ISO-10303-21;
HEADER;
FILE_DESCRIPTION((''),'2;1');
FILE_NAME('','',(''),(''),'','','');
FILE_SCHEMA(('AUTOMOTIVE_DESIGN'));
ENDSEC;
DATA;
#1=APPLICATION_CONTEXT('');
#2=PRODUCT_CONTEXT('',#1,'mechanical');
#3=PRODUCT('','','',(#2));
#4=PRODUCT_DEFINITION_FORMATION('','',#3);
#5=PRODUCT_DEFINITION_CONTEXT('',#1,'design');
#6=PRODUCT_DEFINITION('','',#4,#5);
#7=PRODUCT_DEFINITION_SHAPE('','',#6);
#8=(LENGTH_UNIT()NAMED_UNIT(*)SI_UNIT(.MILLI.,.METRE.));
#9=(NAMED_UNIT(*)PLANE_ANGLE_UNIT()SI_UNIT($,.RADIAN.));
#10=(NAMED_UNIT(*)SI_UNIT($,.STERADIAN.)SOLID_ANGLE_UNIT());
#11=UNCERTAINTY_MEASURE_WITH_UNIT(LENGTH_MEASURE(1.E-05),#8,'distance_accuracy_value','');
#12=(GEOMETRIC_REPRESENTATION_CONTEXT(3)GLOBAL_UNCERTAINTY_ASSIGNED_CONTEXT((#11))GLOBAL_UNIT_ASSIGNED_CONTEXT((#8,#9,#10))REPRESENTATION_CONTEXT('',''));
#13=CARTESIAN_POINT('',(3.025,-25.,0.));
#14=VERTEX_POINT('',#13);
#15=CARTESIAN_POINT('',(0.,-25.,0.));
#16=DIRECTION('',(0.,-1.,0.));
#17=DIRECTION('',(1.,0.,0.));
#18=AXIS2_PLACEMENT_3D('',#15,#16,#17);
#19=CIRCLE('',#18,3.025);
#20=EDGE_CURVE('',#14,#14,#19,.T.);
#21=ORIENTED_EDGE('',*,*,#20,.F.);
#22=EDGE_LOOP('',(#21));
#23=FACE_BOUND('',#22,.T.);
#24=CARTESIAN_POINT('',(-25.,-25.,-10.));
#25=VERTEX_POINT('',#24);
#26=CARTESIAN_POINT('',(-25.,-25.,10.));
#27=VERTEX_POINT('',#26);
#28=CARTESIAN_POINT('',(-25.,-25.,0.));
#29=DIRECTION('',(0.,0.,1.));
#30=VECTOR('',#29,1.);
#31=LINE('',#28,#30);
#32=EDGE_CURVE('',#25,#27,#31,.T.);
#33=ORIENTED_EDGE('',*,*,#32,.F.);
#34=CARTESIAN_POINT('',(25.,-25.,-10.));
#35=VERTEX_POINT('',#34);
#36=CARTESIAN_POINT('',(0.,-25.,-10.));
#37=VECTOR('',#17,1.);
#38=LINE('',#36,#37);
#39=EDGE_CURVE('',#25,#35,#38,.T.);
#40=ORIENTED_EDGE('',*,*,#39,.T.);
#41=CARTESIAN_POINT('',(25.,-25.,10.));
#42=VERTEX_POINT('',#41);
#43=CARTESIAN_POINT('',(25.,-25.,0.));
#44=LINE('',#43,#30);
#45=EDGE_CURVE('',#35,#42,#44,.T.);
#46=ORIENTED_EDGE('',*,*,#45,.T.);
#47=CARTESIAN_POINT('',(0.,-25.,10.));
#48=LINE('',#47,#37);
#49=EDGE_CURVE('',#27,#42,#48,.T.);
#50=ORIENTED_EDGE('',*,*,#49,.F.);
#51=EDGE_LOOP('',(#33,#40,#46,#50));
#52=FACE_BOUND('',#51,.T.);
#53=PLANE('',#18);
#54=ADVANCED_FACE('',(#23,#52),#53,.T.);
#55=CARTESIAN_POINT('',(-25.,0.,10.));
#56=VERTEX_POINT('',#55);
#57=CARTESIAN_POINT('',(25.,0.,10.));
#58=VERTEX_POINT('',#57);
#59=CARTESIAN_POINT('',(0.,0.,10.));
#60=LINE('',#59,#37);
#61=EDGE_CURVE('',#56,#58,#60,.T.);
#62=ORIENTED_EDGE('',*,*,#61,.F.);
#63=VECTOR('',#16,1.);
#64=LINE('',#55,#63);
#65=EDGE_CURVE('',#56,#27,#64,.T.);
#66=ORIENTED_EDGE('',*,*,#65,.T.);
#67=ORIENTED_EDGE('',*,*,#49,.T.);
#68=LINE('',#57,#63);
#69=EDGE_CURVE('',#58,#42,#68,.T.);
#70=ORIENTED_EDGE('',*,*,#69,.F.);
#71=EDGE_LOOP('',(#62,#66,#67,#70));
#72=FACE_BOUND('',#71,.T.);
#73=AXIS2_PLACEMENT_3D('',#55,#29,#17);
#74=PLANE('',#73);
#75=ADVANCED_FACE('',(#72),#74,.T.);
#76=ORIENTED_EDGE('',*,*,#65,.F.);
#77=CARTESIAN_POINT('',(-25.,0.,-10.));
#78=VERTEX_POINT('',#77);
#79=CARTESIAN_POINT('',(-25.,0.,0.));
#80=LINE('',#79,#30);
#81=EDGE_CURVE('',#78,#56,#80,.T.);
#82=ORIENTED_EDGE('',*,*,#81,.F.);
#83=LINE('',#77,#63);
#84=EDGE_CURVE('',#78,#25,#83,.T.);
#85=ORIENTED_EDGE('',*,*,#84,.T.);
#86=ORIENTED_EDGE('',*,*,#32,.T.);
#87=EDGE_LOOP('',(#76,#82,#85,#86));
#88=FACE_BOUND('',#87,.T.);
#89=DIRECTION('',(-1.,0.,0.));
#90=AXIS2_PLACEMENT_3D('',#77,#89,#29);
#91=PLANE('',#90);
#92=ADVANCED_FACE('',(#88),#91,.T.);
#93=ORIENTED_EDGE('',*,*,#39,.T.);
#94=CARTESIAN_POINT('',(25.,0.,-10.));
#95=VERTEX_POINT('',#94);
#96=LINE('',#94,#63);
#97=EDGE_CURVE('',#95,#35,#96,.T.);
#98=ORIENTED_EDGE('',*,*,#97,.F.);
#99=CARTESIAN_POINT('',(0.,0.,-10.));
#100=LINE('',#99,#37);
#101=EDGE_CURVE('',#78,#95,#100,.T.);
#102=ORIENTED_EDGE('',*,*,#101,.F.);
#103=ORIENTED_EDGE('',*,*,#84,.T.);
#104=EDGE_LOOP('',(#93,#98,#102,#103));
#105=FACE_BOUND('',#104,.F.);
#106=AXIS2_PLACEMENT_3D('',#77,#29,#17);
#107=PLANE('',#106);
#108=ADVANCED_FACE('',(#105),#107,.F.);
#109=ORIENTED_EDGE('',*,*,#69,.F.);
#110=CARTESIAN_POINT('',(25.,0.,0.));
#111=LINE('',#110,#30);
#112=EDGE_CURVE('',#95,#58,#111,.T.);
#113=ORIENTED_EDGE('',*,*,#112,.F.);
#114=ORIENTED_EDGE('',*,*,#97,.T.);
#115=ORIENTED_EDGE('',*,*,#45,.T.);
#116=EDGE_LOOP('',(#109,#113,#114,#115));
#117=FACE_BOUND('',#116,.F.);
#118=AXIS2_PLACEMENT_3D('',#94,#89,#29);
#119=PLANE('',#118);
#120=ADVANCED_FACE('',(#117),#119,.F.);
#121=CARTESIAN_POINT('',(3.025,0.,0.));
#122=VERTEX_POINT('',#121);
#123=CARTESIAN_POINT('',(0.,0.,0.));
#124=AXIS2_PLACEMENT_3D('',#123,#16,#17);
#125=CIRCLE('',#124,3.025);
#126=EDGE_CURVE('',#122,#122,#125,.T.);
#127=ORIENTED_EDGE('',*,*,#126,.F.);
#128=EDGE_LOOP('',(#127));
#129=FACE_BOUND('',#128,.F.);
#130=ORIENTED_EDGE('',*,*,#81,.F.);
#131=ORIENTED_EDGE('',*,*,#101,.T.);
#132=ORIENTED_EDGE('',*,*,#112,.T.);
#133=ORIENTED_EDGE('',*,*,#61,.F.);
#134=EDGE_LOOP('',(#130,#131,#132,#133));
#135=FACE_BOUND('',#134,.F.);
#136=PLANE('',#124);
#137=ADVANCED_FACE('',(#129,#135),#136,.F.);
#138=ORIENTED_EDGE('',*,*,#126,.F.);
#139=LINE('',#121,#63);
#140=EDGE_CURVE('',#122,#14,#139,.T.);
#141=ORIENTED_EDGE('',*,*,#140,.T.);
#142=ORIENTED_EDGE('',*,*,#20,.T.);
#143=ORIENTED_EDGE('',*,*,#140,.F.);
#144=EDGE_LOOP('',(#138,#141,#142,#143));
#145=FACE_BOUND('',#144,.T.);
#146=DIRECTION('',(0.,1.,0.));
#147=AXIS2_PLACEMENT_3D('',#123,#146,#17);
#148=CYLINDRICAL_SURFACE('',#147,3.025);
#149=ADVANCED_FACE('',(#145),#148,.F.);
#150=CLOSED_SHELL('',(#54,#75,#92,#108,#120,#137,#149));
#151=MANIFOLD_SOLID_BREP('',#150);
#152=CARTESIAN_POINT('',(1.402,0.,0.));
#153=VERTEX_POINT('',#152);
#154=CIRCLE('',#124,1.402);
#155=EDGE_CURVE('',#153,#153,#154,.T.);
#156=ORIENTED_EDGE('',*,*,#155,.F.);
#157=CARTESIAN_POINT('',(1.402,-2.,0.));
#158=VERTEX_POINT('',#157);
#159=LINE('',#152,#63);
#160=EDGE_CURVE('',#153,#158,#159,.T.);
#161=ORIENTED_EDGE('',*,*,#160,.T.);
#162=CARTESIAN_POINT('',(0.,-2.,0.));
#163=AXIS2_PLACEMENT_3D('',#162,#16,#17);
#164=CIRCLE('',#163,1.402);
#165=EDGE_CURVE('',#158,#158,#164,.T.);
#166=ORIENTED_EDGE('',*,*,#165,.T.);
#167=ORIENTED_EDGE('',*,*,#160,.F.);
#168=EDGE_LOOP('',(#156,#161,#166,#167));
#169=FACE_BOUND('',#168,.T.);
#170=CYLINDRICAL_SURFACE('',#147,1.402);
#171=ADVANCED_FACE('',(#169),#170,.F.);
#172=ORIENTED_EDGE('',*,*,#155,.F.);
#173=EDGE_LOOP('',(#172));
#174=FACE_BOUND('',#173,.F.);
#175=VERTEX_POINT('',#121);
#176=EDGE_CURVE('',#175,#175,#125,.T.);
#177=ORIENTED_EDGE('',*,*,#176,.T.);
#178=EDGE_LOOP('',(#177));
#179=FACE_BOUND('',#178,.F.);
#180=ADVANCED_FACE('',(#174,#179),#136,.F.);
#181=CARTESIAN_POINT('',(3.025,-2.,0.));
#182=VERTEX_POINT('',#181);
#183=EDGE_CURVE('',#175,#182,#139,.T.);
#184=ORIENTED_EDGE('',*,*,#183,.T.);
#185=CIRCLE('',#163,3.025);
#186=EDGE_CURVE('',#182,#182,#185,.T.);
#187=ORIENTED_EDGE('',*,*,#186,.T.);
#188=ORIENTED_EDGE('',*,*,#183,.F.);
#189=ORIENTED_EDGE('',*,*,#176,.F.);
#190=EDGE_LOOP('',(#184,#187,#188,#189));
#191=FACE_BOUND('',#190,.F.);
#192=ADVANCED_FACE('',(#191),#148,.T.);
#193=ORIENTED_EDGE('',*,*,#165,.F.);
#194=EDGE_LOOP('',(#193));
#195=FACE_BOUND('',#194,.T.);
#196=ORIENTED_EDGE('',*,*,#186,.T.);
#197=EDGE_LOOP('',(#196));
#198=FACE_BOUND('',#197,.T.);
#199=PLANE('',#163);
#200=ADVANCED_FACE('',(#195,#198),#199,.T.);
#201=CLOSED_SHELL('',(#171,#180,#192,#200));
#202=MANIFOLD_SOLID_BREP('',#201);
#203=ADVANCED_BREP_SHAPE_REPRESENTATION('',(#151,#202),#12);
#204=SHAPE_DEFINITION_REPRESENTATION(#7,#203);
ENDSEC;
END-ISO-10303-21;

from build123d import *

# Parameters (mm, degrees)
F0_W     = 50
F0_H     = 20
F0_R     = 3.025
F1_DEPTH = 25
F0_R_2   = 1.402
F3_DEPTH = 2


# Not quite as in the source:
# - the program builds the solid bodies; features that only make, move or delete a surface that nothing else refers to are left out


with BuildPart() as f1:
    # F0 (on Front) → F1 (new body)
    with BuildSketch(Plane.XZ):
        Rectangle(F0_W, F0_H)
        Circle(F0_R, mode=Mode.SUBTRACT)
    extrude(amount=F1_DEPTH)


with BuildPart() as f3:
    # F0 (on Front) → F3 (new body)
    with BuildSketch(Plane.XZ):
        Circle(F0_R)
        Circle(F0_R_2, mode=Mode.SUBTRACT)
    extrude(amount=F3_DEPTH)


solid = Compound([f1.part, f3.part])
